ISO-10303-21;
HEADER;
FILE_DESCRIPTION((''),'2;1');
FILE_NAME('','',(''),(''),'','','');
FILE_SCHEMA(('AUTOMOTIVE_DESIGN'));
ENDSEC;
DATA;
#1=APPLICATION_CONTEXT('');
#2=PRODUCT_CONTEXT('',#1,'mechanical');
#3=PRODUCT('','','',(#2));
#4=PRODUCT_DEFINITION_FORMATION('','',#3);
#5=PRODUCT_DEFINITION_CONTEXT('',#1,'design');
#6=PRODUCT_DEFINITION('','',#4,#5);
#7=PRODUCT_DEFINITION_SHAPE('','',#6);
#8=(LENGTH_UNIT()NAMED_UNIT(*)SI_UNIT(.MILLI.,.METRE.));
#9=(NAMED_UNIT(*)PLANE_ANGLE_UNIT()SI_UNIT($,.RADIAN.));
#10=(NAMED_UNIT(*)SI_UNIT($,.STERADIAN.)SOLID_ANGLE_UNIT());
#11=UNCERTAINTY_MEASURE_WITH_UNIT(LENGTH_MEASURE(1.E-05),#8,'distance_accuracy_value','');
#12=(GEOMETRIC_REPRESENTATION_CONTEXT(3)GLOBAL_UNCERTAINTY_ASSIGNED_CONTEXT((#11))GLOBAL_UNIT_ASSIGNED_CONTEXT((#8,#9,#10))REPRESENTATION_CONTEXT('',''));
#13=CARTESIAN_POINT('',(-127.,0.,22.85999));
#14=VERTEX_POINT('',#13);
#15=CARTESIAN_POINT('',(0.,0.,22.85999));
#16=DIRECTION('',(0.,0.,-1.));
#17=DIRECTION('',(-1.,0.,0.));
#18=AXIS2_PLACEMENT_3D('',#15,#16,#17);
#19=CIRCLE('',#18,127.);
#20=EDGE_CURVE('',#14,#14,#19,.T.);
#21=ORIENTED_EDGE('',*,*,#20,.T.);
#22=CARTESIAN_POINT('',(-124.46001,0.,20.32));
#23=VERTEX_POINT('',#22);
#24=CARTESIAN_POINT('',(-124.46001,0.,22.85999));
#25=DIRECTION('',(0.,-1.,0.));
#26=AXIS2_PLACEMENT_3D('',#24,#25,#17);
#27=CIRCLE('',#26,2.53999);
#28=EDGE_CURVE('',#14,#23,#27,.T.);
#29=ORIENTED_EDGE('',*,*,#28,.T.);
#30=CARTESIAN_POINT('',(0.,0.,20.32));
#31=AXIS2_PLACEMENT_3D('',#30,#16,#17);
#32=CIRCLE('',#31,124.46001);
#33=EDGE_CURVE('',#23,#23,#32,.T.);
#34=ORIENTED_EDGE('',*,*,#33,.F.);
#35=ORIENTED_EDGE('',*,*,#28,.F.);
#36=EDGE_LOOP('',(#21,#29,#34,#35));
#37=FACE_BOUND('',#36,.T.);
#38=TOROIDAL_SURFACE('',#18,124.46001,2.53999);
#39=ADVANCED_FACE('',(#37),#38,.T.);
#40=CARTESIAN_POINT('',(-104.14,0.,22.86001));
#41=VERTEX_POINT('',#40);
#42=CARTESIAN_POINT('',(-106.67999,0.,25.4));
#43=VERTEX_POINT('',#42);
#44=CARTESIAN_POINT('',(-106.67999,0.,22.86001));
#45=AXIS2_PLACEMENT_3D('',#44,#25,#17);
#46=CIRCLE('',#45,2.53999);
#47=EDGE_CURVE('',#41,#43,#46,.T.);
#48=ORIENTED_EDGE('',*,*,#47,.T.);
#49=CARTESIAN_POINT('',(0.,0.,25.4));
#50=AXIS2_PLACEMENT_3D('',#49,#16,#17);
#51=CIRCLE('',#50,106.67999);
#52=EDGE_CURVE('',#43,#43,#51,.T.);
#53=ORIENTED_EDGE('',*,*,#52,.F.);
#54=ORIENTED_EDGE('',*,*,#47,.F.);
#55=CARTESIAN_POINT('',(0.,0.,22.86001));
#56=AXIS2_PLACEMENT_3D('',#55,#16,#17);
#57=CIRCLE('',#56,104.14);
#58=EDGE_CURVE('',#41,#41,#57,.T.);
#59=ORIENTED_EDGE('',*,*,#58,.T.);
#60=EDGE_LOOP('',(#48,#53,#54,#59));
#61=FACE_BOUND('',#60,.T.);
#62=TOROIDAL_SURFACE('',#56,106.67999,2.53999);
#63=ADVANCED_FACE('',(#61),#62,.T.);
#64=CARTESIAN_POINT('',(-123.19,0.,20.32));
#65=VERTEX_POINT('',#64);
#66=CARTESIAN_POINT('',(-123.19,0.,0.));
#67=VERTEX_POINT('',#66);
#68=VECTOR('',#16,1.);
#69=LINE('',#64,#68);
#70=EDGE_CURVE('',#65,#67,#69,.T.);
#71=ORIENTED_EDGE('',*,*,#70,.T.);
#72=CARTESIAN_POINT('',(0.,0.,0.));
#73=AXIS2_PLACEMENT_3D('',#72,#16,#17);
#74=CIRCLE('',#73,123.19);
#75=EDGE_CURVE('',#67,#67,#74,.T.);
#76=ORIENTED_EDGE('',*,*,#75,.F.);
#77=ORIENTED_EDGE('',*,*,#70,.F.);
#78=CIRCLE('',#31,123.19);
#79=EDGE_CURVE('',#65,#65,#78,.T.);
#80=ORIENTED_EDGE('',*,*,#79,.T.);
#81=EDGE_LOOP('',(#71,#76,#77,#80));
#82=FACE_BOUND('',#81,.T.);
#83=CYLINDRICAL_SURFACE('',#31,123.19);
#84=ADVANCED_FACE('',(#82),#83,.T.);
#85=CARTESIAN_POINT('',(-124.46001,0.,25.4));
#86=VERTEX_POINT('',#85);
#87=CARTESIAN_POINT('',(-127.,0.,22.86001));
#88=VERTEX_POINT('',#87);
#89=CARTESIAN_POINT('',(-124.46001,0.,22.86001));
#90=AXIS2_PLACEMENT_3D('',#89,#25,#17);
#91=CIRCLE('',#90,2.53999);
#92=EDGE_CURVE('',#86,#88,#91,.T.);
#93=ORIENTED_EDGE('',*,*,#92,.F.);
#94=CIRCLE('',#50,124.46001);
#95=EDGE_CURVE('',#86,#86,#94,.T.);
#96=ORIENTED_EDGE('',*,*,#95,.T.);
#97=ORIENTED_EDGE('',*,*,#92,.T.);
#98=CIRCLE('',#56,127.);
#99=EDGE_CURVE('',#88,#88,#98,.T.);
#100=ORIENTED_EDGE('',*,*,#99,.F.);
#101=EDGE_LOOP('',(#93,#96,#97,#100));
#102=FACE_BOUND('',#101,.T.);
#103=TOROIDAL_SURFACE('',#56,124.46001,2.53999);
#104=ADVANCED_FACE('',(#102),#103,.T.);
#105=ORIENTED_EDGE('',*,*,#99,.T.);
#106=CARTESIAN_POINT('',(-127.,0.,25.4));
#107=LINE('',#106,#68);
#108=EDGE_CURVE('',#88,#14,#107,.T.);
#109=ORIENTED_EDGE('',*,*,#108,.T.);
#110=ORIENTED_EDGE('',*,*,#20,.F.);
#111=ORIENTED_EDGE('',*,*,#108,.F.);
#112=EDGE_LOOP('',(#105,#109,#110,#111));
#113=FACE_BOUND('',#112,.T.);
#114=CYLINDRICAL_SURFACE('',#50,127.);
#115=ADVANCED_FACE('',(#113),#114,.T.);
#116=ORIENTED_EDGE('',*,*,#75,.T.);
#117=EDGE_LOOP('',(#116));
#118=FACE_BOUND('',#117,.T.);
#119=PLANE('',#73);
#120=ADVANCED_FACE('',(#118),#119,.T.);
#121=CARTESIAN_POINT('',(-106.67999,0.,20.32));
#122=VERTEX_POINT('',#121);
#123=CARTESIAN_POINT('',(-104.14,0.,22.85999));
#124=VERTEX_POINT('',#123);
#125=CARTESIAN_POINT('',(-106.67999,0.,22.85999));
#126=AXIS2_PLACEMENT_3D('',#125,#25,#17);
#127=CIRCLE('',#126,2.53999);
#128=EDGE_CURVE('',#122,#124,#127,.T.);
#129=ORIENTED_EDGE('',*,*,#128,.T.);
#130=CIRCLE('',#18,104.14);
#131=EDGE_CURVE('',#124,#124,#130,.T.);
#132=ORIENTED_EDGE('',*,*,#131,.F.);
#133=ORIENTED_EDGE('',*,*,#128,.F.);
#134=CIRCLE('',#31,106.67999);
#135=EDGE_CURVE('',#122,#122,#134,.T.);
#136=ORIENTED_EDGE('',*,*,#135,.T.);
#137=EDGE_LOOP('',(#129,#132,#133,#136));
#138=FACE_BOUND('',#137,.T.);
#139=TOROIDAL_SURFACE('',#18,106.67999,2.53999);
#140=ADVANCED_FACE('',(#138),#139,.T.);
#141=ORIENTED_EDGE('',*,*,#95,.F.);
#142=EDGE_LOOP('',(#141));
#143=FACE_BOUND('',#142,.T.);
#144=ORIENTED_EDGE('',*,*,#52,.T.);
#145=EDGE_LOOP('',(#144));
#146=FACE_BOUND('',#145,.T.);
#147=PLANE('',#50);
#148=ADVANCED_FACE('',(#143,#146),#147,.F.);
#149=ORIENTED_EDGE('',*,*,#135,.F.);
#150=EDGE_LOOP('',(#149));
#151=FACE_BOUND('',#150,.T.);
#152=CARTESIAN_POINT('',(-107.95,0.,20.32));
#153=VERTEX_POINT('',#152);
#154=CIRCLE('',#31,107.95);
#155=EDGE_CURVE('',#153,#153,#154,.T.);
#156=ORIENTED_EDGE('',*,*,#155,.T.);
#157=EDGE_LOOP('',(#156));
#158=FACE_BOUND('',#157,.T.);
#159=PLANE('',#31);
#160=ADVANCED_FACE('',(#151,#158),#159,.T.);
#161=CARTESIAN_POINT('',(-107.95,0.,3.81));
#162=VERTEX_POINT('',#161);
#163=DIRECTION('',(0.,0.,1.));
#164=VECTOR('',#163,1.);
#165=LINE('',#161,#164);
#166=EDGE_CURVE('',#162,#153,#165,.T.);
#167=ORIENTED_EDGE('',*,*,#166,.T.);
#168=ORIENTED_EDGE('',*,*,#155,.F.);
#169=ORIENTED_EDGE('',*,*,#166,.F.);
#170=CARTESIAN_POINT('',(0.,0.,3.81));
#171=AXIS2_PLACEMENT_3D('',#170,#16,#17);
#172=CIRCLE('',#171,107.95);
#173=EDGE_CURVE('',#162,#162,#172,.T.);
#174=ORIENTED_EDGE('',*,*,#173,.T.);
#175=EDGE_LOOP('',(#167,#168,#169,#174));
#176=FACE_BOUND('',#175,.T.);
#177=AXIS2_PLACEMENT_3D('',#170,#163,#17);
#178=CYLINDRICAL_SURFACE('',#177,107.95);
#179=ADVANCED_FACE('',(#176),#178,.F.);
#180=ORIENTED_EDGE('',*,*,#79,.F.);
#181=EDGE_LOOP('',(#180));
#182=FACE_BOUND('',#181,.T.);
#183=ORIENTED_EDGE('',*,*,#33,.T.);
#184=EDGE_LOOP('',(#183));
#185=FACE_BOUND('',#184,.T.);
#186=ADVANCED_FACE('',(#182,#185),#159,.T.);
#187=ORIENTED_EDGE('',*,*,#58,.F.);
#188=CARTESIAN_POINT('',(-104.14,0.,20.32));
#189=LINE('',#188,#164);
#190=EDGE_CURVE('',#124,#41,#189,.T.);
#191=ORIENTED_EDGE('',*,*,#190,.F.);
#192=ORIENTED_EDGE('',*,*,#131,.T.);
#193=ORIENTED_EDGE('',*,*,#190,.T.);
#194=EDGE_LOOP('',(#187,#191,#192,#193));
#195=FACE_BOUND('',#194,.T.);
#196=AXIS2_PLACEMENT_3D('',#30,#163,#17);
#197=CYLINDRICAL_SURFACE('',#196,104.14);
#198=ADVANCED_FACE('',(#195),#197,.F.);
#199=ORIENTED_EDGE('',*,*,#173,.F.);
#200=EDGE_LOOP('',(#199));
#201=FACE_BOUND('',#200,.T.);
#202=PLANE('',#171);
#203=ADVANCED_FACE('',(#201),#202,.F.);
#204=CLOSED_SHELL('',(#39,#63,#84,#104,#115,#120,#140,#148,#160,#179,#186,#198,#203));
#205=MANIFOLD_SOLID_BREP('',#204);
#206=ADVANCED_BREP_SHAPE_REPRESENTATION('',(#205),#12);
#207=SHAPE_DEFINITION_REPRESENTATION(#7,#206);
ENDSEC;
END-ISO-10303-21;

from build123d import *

# Parameters (mm, degrees)
F2_R = 2.53999


# Not quite as in the source:
# - a fillet or chamfer is up to 0.001 mm smaller than in the source, because OpenCascade refuses the exact size


with BuildPart() as f1:
    # F0 (on Front) → F1 (revolve)
    with BuildSketch(Plane.XZ):
        Polygon((-123.19, 0), (0, 0), (0, 3.81), (-107.95, 3.81), (-107.95, 20.32), (-104.14, 20.32), (-104.14, 25.4), (-127, 25.4), (-127, 20.32), (-123.19, 20.32), align=None)
    revolve(axis=Axis((0, 0, 1.905), (0, 0, -1)))

    # F2 (radius 2.54 in the source; OpenCascade refuses exactly that, so slightly less here)
    f2_edges = [f1.edges().sort_by_distance(p)[0] for p in [
        (127, 0, 25.4),
        (127, 0, 20.32),
        (-127, 0, 22.86),
        (104.14, 0, 20.32),
        (104.14, 0, 25.4),
        (-104.14, 0, 22.86),
    ]]
    fillet(f2_edges, radius=F2_R)


solid = f1.part
